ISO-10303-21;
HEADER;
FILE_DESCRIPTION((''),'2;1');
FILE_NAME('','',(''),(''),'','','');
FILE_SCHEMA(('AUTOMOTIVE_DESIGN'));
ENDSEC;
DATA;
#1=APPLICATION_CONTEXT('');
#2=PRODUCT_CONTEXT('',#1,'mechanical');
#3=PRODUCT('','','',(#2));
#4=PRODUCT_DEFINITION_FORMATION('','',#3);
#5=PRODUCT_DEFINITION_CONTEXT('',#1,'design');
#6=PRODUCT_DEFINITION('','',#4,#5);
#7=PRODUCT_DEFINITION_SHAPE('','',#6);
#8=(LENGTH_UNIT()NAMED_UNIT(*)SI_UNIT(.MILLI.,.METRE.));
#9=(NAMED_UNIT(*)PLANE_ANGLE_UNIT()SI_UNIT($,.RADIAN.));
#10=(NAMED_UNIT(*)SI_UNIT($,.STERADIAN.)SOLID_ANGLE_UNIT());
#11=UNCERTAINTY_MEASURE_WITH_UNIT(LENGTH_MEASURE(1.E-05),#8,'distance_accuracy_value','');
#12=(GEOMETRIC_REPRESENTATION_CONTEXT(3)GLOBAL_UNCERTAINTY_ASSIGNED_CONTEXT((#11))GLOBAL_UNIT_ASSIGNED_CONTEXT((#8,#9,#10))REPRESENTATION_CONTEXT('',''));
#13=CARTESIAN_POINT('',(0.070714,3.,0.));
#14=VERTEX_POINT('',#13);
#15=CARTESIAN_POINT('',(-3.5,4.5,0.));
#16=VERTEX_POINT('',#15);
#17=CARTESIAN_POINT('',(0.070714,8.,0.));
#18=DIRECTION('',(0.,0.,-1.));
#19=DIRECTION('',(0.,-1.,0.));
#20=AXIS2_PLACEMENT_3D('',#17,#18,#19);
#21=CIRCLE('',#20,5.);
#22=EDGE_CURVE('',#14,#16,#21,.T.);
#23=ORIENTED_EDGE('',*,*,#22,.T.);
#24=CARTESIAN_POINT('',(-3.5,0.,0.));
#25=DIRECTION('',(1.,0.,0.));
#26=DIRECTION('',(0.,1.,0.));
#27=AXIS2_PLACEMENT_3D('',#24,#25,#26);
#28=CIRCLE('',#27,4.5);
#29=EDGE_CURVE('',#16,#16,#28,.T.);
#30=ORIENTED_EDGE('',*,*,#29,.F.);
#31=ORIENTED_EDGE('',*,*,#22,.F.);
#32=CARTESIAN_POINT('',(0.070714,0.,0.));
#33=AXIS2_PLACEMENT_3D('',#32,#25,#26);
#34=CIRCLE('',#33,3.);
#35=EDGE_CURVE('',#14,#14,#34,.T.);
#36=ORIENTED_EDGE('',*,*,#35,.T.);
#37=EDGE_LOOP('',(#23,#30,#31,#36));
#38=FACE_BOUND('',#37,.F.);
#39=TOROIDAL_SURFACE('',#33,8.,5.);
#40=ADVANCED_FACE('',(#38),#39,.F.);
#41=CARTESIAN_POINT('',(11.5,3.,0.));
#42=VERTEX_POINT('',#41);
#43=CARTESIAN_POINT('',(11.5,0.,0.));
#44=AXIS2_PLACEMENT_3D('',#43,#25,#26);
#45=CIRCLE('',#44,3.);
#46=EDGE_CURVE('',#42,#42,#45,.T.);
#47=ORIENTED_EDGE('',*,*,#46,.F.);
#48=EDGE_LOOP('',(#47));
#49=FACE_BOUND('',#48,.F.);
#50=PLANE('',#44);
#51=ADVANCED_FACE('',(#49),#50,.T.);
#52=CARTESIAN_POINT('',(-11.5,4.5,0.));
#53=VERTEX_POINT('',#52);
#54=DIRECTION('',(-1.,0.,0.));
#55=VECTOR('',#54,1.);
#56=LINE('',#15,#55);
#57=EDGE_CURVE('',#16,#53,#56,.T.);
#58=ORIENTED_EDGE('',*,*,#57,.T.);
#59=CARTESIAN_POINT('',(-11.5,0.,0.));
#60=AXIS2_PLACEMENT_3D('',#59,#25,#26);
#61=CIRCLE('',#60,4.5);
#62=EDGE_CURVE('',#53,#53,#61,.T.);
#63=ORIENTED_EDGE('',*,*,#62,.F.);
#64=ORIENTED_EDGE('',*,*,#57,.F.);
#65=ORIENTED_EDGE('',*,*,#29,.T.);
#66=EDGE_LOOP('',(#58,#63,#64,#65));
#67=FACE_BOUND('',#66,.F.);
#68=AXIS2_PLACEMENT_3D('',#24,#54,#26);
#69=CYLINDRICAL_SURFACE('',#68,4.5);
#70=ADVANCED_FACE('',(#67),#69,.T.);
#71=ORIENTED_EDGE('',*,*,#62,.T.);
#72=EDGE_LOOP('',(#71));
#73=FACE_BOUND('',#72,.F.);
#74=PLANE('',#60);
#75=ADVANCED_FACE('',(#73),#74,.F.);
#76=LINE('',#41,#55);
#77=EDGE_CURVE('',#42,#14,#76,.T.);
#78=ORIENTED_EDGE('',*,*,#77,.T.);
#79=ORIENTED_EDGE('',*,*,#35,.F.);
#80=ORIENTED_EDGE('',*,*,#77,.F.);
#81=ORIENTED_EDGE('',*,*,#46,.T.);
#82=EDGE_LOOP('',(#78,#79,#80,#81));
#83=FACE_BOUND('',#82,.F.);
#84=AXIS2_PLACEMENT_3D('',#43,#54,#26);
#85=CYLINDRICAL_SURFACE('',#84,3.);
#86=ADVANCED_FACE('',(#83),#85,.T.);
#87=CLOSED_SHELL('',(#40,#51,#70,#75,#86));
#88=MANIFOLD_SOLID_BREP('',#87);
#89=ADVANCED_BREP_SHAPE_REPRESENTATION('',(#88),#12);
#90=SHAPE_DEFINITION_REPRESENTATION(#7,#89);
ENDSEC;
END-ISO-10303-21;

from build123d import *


# Not quite as in the source:
# - a fillet or chamfer that OpenCascade refuses, or shapes differently, is made with other operations: its cross-section is extruded or revolved along the edge and cut away or added


with BuildPart() as f1:
    # F0 (on Top) → F1 (revolve)
    with BuildSketch(Plane.XY):
        Polygon((-11.5, 4.5), (-11.5, 0), (11.5, 0), (11.5, 3), (-3.5, 3), (-3.5, 4.5), align=None)
    revolve(axis=Axis((-2.8623924786, 0, 0), (1, 0, 0)))

    # F2: fillet of radius 5 on 1 edges, made by hand

    # F2_s1 → F2_t2 (revolve)
    with BuildSketch(Plane.XY):
        with BuildLine():
            ThreePointArc((0.0707142143, 3), (-1.8657774588, 3.3902277714), (-3.5, 4.5))
            Line((-3.5, 4.5), (-3.5, 3))
            Line((-3.5, 3), (0.0707142143, 3))
        make_face()
    revolve(axis=Axis((-3.5, 0, 0), (1, 0, 0)))


solid = f1.part
